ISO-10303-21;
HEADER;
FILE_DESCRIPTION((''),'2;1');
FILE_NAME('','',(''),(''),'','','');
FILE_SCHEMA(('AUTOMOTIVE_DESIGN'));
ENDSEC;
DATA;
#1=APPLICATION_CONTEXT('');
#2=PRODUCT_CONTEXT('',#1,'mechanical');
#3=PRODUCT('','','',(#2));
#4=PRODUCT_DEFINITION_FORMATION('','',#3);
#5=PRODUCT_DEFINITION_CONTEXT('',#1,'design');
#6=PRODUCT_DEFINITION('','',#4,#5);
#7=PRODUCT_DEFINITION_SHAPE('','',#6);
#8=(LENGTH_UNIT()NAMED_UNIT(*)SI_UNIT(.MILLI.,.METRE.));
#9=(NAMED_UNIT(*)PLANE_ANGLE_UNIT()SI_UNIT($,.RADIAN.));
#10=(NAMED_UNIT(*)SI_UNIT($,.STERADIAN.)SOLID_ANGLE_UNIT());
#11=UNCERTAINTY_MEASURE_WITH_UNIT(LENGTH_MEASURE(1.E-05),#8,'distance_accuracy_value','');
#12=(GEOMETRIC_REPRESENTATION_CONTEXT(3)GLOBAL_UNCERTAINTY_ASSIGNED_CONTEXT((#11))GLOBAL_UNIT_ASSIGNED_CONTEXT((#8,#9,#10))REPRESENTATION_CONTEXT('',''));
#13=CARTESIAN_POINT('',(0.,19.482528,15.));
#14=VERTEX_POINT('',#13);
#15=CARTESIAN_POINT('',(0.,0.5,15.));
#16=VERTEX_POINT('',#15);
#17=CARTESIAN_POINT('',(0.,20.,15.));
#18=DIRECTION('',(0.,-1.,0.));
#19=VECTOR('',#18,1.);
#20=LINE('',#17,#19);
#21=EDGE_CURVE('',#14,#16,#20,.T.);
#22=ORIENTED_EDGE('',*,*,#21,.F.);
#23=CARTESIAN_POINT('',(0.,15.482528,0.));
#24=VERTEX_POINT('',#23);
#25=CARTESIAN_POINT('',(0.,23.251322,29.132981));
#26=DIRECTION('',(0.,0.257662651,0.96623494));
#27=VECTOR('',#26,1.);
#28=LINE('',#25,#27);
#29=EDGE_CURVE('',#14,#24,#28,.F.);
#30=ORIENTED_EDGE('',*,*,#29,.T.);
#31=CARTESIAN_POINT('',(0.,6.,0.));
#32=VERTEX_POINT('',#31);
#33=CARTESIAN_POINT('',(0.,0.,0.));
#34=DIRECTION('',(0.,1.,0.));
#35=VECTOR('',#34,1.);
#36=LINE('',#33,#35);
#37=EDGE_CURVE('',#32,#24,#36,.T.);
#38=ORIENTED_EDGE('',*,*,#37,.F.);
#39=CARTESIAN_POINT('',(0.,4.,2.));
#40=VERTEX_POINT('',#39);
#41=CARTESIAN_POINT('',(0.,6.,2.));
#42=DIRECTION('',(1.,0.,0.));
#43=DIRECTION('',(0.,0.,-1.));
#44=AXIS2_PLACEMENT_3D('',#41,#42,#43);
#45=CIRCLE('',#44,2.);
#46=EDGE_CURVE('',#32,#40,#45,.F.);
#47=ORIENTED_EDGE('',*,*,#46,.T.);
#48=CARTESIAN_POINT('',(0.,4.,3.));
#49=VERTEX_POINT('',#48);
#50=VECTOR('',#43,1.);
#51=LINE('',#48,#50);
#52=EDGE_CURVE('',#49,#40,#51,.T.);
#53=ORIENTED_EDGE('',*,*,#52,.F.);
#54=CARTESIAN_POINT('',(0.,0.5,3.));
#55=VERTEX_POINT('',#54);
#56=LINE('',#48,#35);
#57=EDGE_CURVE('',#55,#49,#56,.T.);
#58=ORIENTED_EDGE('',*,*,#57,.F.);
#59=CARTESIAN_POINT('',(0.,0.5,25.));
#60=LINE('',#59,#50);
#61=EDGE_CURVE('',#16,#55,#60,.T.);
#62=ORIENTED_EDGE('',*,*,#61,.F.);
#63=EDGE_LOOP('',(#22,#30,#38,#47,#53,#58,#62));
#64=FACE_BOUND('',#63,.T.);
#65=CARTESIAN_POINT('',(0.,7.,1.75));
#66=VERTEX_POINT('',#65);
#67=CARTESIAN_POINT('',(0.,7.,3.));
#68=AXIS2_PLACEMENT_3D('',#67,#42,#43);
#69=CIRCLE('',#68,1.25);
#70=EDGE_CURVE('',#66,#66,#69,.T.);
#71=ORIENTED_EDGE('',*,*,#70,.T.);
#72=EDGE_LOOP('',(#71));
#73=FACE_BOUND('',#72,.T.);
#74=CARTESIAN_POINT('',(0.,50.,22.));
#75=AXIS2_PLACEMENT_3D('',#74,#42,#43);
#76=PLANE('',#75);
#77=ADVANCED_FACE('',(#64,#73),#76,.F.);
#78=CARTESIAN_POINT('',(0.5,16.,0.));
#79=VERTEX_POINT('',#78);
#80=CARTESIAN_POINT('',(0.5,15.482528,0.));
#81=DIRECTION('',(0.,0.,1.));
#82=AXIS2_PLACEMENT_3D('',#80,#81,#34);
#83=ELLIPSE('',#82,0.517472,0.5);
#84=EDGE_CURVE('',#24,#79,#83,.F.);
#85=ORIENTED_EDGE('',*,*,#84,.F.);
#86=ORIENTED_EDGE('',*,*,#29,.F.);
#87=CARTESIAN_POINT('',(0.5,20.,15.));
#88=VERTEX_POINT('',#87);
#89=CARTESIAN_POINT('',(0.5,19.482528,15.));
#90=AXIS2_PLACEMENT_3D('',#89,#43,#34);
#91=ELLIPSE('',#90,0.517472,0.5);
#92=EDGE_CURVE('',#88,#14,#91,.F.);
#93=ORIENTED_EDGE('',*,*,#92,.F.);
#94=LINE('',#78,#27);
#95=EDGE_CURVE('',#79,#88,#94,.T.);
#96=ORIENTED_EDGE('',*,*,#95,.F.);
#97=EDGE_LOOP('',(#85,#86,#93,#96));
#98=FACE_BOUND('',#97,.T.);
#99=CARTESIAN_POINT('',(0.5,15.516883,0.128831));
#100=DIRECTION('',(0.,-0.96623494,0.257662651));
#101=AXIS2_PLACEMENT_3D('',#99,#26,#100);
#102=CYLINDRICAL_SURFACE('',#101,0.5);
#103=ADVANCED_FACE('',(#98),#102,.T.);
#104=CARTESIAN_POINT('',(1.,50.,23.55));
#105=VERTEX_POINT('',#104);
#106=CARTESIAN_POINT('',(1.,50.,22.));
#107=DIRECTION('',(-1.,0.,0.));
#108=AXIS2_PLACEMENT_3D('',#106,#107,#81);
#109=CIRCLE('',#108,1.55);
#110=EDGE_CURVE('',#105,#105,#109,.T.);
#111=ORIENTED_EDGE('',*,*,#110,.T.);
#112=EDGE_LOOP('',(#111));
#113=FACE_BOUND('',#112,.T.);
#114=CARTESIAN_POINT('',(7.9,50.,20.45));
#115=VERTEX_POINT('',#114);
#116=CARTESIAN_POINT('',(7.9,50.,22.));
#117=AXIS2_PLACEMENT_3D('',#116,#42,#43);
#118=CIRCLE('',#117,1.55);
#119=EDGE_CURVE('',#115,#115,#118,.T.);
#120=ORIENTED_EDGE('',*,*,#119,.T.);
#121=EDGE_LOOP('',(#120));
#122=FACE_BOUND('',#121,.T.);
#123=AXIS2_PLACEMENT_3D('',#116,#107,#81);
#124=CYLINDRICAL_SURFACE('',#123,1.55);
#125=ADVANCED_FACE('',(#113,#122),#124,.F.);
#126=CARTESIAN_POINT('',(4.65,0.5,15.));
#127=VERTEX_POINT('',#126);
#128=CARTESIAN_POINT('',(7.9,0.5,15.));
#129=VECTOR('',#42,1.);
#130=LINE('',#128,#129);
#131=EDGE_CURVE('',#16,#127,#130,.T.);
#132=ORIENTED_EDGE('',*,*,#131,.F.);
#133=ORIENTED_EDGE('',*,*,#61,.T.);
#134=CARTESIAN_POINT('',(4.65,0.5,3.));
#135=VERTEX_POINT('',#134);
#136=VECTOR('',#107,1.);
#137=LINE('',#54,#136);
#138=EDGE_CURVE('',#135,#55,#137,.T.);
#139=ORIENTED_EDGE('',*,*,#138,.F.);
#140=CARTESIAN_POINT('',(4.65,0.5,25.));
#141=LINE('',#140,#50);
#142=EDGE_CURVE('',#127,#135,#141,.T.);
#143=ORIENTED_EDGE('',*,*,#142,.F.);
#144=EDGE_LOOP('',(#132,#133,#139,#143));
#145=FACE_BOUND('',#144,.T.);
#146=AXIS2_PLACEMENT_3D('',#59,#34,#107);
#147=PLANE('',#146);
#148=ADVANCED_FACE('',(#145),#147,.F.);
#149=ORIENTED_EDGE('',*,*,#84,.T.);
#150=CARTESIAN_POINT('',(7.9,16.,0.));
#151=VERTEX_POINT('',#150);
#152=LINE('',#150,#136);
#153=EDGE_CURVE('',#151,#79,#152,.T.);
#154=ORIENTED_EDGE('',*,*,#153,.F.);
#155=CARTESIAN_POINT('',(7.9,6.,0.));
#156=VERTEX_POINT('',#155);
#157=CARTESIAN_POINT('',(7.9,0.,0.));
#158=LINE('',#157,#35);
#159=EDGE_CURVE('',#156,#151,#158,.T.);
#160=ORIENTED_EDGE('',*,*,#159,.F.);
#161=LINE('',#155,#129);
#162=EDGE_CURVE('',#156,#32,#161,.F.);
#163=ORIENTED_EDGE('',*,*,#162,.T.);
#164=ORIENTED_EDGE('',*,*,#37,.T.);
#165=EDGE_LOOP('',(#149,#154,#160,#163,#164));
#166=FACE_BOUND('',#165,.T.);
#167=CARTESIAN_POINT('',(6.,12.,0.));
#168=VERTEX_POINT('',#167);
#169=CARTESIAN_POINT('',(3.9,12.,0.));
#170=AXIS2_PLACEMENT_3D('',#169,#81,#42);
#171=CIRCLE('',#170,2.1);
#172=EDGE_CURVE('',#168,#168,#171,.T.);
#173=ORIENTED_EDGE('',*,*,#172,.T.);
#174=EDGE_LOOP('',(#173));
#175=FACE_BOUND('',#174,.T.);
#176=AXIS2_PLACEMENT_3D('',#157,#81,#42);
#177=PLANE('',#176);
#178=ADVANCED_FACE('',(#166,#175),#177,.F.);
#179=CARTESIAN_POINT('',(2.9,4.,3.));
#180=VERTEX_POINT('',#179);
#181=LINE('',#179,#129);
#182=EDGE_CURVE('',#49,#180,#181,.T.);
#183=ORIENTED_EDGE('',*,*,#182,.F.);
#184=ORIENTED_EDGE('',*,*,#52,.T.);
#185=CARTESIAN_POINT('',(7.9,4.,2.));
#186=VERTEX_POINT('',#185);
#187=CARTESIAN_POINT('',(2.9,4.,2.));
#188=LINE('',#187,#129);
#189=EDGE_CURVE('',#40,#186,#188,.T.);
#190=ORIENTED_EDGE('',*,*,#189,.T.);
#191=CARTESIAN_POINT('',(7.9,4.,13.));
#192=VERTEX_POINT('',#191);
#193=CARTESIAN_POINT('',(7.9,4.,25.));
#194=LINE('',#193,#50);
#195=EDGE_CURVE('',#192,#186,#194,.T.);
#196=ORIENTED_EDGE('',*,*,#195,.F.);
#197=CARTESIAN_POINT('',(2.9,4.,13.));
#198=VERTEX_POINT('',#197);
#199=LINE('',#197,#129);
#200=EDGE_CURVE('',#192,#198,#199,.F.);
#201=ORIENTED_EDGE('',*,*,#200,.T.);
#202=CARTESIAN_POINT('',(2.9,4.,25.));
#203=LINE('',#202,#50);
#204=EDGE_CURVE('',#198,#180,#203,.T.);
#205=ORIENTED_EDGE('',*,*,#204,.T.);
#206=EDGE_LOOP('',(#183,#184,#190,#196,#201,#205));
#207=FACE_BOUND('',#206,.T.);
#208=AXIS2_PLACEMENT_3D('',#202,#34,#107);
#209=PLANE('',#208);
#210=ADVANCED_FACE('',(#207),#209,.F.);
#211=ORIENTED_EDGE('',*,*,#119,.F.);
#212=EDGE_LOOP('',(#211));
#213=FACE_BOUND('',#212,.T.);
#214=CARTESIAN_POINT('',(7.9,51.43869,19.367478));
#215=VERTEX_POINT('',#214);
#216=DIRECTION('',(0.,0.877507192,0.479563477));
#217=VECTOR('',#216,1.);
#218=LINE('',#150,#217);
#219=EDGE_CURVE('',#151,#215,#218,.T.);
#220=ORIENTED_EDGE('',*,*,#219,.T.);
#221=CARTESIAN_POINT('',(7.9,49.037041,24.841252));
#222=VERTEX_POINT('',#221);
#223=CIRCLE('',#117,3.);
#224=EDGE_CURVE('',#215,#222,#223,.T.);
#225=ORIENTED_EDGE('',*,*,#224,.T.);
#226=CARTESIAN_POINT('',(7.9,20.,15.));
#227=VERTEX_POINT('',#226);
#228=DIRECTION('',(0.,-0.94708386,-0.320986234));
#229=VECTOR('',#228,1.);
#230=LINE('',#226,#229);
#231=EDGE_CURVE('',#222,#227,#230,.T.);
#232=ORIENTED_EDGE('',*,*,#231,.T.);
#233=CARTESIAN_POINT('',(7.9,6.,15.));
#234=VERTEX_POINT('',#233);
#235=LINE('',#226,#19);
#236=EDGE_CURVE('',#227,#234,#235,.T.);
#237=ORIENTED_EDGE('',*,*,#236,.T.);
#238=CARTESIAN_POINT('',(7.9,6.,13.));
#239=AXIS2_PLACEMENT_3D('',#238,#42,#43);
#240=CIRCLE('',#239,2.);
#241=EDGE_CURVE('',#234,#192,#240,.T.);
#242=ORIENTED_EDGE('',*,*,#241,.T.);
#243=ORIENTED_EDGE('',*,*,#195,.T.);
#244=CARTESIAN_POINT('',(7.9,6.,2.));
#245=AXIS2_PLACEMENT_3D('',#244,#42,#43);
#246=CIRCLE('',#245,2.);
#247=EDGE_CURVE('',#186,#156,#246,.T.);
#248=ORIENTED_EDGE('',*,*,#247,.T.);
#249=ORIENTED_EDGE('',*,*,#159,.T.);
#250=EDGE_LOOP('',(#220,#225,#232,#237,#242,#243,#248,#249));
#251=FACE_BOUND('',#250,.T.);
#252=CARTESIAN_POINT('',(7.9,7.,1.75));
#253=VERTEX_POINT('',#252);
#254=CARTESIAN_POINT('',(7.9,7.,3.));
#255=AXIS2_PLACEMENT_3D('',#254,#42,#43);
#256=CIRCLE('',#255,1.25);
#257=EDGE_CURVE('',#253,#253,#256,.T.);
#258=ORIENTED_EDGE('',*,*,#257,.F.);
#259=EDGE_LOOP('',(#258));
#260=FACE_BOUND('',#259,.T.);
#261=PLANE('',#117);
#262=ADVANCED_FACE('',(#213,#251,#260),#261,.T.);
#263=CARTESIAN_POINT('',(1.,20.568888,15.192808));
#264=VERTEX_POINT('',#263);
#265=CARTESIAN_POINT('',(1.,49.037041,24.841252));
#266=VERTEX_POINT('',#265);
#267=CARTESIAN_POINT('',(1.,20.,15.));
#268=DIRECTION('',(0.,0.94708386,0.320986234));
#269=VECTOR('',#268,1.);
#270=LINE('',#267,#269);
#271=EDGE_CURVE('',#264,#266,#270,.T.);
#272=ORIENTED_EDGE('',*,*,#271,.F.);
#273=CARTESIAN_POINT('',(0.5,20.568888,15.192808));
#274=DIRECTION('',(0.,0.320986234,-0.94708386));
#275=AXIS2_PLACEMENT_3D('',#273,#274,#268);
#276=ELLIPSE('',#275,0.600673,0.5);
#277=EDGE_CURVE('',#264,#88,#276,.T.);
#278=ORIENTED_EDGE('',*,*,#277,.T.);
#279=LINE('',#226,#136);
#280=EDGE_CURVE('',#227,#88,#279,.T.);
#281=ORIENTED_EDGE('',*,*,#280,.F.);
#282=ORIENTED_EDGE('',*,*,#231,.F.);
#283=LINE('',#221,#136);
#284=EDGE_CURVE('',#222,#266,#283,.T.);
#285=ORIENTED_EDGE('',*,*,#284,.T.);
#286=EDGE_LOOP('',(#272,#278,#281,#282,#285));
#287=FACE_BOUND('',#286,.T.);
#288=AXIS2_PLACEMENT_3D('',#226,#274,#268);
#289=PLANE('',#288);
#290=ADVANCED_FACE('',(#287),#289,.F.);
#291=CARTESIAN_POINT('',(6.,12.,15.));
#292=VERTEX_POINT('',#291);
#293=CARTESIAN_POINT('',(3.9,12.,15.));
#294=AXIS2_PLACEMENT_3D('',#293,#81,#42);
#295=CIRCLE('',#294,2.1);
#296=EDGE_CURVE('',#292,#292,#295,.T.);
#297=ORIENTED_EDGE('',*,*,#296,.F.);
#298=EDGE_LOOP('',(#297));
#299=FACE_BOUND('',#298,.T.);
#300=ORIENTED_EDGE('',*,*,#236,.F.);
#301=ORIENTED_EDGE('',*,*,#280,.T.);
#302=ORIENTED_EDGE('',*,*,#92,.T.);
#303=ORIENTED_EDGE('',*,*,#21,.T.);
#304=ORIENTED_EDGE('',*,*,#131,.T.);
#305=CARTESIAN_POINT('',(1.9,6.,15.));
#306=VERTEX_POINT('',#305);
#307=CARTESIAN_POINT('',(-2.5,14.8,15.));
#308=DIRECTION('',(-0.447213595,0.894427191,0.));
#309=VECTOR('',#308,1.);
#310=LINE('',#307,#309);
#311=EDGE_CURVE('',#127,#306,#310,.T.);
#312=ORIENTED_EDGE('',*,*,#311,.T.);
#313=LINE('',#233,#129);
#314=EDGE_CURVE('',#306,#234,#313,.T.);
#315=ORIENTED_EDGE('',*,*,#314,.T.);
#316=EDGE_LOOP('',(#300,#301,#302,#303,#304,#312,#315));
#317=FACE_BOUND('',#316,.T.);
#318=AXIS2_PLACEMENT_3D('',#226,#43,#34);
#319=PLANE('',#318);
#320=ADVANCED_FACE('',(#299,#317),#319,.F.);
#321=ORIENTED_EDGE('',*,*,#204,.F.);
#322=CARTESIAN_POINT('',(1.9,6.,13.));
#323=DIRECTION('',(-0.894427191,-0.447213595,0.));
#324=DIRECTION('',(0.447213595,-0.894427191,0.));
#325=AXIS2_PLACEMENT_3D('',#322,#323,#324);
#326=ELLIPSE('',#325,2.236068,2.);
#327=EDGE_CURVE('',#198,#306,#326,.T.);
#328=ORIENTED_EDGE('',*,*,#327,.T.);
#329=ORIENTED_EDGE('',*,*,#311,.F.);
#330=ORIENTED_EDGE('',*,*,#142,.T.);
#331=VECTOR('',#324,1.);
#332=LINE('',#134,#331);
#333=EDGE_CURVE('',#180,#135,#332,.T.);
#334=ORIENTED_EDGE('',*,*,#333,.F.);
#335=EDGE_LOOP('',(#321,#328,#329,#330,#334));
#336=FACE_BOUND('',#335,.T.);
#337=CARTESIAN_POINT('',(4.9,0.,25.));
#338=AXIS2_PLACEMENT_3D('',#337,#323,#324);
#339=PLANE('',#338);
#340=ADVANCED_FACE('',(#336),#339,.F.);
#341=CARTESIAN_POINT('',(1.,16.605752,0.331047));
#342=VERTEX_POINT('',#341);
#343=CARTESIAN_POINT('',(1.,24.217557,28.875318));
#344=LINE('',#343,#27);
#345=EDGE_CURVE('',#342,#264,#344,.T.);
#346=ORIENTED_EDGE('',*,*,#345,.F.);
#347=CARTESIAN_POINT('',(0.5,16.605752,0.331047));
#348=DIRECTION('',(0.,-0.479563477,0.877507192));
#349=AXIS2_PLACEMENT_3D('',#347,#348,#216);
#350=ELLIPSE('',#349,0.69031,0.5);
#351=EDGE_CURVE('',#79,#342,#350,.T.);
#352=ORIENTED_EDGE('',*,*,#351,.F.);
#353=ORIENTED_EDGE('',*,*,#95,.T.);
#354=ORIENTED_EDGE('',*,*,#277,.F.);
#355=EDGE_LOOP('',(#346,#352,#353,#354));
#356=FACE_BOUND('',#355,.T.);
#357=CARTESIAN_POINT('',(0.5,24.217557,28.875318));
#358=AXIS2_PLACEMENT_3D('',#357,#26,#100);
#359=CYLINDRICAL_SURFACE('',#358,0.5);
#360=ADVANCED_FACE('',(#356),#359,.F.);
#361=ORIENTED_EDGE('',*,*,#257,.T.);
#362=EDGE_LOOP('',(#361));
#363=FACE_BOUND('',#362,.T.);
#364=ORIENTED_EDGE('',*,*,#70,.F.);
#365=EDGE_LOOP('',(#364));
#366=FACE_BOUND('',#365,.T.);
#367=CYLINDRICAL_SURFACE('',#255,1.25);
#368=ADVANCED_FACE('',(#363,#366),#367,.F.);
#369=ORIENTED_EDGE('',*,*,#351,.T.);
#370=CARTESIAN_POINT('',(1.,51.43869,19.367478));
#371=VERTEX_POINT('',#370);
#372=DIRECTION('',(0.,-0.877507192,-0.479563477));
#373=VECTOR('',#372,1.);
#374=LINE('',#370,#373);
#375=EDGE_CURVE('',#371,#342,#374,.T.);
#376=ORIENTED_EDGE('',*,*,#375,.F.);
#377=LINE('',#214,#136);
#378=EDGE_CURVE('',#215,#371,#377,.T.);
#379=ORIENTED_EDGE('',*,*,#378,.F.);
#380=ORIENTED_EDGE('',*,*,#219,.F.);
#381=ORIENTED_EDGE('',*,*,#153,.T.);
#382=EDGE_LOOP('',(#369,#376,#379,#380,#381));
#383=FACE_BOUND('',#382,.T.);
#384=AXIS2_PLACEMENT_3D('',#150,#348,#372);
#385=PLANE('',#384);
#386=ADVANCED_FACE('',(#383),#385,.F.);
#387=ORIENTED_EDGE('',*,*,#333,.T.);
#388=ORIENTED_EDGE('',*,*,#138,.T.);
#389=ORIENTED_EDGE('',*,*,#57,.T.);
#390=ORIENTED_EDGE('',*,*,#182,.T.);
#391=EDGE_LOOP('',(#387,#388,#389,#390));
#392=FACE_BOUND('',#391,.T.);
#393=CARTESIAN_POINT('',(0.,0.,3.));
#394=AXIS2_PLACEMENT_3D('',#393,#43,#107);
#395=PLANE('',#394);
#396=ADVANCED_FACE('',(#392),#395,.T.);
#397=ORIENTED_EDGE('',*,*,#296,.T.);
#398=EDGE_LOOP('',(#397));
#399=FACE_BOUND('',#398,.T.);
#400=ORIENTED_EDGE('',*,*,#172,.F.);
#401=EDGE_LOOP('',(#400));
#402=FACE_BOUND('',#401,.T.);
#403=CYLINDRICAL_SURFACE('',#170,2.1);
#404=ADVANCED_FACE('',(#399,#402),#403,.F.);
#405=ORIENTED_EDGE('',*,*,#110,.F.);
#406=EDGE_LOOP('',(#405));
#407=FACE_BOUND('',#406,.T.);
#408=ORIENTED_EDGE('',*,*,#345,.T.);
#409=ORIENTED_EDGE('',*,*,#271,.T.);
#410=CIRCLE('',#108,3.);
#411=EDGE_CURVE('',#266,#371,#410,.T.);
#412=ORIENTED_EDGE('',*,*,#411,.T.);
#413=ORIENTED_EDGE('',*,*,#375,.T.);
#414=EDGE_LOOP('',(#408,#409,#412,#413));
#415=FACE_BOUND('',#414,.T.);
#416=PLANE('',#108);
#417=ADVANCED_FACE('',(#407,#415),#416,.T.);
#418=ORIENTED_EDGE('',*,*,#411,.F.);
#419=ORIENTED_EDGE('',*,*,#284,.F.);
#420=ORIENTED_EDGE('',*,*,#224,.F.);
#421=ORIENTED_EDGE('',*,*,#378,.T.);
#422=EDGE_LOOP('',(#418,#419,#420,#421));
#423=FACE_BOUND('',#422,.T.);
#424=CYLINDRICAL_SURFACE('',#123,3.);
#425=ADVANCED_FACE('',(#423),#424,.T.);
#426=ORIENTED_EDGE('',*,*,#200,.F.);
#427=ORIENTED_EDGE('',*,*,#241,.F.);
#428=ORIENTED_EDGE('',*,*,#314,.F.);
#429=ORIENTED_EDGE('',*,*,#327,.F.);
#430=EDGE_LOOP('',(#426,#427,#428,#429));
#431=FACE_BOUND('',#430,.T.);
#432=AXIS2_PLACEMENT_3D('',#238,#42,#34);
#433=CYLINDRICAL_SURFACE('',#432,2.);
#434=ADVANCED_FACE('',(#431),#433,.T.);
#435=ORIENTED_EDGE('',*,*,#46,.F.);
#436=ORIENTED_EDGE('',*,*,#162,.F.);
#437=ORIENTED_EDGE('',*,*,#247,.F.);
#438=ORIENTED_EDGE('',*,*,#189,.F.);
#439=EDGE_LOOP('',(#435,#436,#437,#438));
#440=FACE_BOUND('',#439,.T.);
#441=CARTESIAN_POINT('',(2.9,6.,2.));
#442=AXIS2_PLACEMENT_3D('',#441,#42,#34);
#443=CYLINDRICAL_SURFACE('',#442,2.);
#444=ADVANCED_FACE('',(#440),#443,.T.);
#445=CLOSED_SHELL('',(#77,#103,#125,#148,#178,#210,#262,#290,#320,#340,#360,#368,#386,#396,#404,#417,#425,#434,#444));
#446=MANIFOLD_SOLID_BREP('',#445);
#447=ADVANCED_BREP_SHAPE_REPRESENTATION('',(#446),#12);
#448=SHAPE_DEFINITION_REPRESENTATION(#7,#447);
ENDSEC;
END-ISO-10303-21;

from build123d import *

# Parameters (mm, degrees)
SKETCH1_R             = 1.55
BOSS_EXTRUDE1_DEPTH   = 7.9
CUT_EXTRUDE2_DEPTH    = 60.130449009
M3X0_5_TAPPED_HOLE1_D = 2.5
SKETCH7_W             = 8
SKETCH7_H             = 0.5
CUT_EXTRUDE3_DEPTH    = 60.130449009
SKETCH8_R             = 2.1
CUT_EXTRUDE4_DEPTH    = 56.645395137
CUT_EXTRUDE5_DEPTH    = 3
CUT_EXTRUDE6_DEPTH    = 1
FILLET4_R             = 0.5
FILLET5_R             = 2


with BuildPart() as part:
    # Sketch1 → Boss-Extrude1 (new body)
    with BuildSketch(Plane(origin=(0, 0, 0), x_dir=(0, 0, -1), z_dir=(1, 0, 0))):
        with BuildLine():
            Line((0, 0), (0, 16))
            Line((0, 16), (-19.367478425, 51.438690431))
            ThreePointArc((-19.367478425, 51.438690431), (-23.205351274, 52.747203725), (-24.84125158, 49.037041298))
            Line((-24.84125158, 49.037041298), (-15, 20))
            Line((-15, 20), (-15, 0))
            Line((-15, 0), (0, 0))
        make_face()
        with Locations((-22, 50)):
            Circle(SKETCH1_R, mode=Mode.SUBTRACT)
    extrude(amount=BOSS_EXTRUDE1_DEPTH)

    # Sketch3 → Cut-Extrude2 (cut, through all)
    with BuildSketch(Plane(origin=(0, 0, 0), x_dir=(-1, 0, 0), z_dir=(0, 0, -1))):
        Polygon((-7.9, 0), (-4.9, 0), (-2.9, 4), (-7.9, 4), align=None)
    extrude(amount=-CUT_EXTRUDE2_DEPTH, mode=Mode.SUBTRACT)

    # M3x0.5 Tapped Hole1 (through all)
    with Locations(Plane(origin=(7.9, 7, 3), x_dir=(0, 0, 1), z_dir=(1, 0, 0))):
        with Locations((0, 0)):
            Hole(M3X0_5_TAPPED_HOLE1_D / 2)

    # Sketch7 → Cut-Extrude3 (cut, through all)
    with BuildSketch(Plane(origin=(0, 0, 0), x_dir=(-1, 0, 0), z_dir=(0, 0, -1))):
        with Locations((-4, 0.25)):
            Rectangle(SKETCH7_W, SKETCH7_H)
    extrude(amount=-CUT_EXTRUDE3_DEPTH, mode=Mode.SUBTRACT)

    # Sketch8 → Cut-Extrude4 (cut, through all)
    with BuildSketch(Plane.XY.offset(15)):
        with Locations((3.9, 12)):
            Circle(SKETCH8_R)
    extrude(amount=-CUT_EXTRUDE4_DEPTH, mode=Mode.SUBTRACT)

    # Sketch9 → Cut-Extrude5 (cut)
    with BuildSketch(Plane(origin=(0, 0, 0), x_dir=(-1, 0, 0), z_dir=(0, 0, -1))):
        Polygon((-4.65, 0.5), (-2.9, 4), (0, 4), (0, 0.5), align=None)
    extrude(amount=-CUT_EXTRUDE5_DEPTH, mode=Mode.SUBTRACT)

    # Sketch11 → Cut-Extrude6 (cut)
    with BuildSketch(Plane.ZY):
        with BuildLine():
            Line((0, 16), (15, 20))
            Line((15, 20), (24.84125158, 49.037041298))
            ThreePointArc((24.84125158, 49.037041298), (23.205351274, 52.747203725), (19.367478425, 51.438690431))
            Line((19.367478425, 51.438690431), (0, 16))
        make_face()
    extrude(amount=-CUT_EXTRUDE6_DEPTH, mode=Mode.SUBTRACT)

    # Fillet4
    fillet4_edges = [part.edges().sort_by_distance(p)[0] for p in [
        (1, 18, 7.5),
        (0, 18, 7.5),
    ]]
    fillet(fillet4_edges, radius=FILLET4_R - 0.0001)  # a hair under: the kernel refuses the full size

    # Fillet5
    fillet5_edges = [part.edges().sort_by_distance(p)[0] for p in [
        (5.4, 4, 15),
        (3.95, 4, 0),
    ]]
    fillet(fillet5_edges, radius=FILLET5_R)


solid = part.part
